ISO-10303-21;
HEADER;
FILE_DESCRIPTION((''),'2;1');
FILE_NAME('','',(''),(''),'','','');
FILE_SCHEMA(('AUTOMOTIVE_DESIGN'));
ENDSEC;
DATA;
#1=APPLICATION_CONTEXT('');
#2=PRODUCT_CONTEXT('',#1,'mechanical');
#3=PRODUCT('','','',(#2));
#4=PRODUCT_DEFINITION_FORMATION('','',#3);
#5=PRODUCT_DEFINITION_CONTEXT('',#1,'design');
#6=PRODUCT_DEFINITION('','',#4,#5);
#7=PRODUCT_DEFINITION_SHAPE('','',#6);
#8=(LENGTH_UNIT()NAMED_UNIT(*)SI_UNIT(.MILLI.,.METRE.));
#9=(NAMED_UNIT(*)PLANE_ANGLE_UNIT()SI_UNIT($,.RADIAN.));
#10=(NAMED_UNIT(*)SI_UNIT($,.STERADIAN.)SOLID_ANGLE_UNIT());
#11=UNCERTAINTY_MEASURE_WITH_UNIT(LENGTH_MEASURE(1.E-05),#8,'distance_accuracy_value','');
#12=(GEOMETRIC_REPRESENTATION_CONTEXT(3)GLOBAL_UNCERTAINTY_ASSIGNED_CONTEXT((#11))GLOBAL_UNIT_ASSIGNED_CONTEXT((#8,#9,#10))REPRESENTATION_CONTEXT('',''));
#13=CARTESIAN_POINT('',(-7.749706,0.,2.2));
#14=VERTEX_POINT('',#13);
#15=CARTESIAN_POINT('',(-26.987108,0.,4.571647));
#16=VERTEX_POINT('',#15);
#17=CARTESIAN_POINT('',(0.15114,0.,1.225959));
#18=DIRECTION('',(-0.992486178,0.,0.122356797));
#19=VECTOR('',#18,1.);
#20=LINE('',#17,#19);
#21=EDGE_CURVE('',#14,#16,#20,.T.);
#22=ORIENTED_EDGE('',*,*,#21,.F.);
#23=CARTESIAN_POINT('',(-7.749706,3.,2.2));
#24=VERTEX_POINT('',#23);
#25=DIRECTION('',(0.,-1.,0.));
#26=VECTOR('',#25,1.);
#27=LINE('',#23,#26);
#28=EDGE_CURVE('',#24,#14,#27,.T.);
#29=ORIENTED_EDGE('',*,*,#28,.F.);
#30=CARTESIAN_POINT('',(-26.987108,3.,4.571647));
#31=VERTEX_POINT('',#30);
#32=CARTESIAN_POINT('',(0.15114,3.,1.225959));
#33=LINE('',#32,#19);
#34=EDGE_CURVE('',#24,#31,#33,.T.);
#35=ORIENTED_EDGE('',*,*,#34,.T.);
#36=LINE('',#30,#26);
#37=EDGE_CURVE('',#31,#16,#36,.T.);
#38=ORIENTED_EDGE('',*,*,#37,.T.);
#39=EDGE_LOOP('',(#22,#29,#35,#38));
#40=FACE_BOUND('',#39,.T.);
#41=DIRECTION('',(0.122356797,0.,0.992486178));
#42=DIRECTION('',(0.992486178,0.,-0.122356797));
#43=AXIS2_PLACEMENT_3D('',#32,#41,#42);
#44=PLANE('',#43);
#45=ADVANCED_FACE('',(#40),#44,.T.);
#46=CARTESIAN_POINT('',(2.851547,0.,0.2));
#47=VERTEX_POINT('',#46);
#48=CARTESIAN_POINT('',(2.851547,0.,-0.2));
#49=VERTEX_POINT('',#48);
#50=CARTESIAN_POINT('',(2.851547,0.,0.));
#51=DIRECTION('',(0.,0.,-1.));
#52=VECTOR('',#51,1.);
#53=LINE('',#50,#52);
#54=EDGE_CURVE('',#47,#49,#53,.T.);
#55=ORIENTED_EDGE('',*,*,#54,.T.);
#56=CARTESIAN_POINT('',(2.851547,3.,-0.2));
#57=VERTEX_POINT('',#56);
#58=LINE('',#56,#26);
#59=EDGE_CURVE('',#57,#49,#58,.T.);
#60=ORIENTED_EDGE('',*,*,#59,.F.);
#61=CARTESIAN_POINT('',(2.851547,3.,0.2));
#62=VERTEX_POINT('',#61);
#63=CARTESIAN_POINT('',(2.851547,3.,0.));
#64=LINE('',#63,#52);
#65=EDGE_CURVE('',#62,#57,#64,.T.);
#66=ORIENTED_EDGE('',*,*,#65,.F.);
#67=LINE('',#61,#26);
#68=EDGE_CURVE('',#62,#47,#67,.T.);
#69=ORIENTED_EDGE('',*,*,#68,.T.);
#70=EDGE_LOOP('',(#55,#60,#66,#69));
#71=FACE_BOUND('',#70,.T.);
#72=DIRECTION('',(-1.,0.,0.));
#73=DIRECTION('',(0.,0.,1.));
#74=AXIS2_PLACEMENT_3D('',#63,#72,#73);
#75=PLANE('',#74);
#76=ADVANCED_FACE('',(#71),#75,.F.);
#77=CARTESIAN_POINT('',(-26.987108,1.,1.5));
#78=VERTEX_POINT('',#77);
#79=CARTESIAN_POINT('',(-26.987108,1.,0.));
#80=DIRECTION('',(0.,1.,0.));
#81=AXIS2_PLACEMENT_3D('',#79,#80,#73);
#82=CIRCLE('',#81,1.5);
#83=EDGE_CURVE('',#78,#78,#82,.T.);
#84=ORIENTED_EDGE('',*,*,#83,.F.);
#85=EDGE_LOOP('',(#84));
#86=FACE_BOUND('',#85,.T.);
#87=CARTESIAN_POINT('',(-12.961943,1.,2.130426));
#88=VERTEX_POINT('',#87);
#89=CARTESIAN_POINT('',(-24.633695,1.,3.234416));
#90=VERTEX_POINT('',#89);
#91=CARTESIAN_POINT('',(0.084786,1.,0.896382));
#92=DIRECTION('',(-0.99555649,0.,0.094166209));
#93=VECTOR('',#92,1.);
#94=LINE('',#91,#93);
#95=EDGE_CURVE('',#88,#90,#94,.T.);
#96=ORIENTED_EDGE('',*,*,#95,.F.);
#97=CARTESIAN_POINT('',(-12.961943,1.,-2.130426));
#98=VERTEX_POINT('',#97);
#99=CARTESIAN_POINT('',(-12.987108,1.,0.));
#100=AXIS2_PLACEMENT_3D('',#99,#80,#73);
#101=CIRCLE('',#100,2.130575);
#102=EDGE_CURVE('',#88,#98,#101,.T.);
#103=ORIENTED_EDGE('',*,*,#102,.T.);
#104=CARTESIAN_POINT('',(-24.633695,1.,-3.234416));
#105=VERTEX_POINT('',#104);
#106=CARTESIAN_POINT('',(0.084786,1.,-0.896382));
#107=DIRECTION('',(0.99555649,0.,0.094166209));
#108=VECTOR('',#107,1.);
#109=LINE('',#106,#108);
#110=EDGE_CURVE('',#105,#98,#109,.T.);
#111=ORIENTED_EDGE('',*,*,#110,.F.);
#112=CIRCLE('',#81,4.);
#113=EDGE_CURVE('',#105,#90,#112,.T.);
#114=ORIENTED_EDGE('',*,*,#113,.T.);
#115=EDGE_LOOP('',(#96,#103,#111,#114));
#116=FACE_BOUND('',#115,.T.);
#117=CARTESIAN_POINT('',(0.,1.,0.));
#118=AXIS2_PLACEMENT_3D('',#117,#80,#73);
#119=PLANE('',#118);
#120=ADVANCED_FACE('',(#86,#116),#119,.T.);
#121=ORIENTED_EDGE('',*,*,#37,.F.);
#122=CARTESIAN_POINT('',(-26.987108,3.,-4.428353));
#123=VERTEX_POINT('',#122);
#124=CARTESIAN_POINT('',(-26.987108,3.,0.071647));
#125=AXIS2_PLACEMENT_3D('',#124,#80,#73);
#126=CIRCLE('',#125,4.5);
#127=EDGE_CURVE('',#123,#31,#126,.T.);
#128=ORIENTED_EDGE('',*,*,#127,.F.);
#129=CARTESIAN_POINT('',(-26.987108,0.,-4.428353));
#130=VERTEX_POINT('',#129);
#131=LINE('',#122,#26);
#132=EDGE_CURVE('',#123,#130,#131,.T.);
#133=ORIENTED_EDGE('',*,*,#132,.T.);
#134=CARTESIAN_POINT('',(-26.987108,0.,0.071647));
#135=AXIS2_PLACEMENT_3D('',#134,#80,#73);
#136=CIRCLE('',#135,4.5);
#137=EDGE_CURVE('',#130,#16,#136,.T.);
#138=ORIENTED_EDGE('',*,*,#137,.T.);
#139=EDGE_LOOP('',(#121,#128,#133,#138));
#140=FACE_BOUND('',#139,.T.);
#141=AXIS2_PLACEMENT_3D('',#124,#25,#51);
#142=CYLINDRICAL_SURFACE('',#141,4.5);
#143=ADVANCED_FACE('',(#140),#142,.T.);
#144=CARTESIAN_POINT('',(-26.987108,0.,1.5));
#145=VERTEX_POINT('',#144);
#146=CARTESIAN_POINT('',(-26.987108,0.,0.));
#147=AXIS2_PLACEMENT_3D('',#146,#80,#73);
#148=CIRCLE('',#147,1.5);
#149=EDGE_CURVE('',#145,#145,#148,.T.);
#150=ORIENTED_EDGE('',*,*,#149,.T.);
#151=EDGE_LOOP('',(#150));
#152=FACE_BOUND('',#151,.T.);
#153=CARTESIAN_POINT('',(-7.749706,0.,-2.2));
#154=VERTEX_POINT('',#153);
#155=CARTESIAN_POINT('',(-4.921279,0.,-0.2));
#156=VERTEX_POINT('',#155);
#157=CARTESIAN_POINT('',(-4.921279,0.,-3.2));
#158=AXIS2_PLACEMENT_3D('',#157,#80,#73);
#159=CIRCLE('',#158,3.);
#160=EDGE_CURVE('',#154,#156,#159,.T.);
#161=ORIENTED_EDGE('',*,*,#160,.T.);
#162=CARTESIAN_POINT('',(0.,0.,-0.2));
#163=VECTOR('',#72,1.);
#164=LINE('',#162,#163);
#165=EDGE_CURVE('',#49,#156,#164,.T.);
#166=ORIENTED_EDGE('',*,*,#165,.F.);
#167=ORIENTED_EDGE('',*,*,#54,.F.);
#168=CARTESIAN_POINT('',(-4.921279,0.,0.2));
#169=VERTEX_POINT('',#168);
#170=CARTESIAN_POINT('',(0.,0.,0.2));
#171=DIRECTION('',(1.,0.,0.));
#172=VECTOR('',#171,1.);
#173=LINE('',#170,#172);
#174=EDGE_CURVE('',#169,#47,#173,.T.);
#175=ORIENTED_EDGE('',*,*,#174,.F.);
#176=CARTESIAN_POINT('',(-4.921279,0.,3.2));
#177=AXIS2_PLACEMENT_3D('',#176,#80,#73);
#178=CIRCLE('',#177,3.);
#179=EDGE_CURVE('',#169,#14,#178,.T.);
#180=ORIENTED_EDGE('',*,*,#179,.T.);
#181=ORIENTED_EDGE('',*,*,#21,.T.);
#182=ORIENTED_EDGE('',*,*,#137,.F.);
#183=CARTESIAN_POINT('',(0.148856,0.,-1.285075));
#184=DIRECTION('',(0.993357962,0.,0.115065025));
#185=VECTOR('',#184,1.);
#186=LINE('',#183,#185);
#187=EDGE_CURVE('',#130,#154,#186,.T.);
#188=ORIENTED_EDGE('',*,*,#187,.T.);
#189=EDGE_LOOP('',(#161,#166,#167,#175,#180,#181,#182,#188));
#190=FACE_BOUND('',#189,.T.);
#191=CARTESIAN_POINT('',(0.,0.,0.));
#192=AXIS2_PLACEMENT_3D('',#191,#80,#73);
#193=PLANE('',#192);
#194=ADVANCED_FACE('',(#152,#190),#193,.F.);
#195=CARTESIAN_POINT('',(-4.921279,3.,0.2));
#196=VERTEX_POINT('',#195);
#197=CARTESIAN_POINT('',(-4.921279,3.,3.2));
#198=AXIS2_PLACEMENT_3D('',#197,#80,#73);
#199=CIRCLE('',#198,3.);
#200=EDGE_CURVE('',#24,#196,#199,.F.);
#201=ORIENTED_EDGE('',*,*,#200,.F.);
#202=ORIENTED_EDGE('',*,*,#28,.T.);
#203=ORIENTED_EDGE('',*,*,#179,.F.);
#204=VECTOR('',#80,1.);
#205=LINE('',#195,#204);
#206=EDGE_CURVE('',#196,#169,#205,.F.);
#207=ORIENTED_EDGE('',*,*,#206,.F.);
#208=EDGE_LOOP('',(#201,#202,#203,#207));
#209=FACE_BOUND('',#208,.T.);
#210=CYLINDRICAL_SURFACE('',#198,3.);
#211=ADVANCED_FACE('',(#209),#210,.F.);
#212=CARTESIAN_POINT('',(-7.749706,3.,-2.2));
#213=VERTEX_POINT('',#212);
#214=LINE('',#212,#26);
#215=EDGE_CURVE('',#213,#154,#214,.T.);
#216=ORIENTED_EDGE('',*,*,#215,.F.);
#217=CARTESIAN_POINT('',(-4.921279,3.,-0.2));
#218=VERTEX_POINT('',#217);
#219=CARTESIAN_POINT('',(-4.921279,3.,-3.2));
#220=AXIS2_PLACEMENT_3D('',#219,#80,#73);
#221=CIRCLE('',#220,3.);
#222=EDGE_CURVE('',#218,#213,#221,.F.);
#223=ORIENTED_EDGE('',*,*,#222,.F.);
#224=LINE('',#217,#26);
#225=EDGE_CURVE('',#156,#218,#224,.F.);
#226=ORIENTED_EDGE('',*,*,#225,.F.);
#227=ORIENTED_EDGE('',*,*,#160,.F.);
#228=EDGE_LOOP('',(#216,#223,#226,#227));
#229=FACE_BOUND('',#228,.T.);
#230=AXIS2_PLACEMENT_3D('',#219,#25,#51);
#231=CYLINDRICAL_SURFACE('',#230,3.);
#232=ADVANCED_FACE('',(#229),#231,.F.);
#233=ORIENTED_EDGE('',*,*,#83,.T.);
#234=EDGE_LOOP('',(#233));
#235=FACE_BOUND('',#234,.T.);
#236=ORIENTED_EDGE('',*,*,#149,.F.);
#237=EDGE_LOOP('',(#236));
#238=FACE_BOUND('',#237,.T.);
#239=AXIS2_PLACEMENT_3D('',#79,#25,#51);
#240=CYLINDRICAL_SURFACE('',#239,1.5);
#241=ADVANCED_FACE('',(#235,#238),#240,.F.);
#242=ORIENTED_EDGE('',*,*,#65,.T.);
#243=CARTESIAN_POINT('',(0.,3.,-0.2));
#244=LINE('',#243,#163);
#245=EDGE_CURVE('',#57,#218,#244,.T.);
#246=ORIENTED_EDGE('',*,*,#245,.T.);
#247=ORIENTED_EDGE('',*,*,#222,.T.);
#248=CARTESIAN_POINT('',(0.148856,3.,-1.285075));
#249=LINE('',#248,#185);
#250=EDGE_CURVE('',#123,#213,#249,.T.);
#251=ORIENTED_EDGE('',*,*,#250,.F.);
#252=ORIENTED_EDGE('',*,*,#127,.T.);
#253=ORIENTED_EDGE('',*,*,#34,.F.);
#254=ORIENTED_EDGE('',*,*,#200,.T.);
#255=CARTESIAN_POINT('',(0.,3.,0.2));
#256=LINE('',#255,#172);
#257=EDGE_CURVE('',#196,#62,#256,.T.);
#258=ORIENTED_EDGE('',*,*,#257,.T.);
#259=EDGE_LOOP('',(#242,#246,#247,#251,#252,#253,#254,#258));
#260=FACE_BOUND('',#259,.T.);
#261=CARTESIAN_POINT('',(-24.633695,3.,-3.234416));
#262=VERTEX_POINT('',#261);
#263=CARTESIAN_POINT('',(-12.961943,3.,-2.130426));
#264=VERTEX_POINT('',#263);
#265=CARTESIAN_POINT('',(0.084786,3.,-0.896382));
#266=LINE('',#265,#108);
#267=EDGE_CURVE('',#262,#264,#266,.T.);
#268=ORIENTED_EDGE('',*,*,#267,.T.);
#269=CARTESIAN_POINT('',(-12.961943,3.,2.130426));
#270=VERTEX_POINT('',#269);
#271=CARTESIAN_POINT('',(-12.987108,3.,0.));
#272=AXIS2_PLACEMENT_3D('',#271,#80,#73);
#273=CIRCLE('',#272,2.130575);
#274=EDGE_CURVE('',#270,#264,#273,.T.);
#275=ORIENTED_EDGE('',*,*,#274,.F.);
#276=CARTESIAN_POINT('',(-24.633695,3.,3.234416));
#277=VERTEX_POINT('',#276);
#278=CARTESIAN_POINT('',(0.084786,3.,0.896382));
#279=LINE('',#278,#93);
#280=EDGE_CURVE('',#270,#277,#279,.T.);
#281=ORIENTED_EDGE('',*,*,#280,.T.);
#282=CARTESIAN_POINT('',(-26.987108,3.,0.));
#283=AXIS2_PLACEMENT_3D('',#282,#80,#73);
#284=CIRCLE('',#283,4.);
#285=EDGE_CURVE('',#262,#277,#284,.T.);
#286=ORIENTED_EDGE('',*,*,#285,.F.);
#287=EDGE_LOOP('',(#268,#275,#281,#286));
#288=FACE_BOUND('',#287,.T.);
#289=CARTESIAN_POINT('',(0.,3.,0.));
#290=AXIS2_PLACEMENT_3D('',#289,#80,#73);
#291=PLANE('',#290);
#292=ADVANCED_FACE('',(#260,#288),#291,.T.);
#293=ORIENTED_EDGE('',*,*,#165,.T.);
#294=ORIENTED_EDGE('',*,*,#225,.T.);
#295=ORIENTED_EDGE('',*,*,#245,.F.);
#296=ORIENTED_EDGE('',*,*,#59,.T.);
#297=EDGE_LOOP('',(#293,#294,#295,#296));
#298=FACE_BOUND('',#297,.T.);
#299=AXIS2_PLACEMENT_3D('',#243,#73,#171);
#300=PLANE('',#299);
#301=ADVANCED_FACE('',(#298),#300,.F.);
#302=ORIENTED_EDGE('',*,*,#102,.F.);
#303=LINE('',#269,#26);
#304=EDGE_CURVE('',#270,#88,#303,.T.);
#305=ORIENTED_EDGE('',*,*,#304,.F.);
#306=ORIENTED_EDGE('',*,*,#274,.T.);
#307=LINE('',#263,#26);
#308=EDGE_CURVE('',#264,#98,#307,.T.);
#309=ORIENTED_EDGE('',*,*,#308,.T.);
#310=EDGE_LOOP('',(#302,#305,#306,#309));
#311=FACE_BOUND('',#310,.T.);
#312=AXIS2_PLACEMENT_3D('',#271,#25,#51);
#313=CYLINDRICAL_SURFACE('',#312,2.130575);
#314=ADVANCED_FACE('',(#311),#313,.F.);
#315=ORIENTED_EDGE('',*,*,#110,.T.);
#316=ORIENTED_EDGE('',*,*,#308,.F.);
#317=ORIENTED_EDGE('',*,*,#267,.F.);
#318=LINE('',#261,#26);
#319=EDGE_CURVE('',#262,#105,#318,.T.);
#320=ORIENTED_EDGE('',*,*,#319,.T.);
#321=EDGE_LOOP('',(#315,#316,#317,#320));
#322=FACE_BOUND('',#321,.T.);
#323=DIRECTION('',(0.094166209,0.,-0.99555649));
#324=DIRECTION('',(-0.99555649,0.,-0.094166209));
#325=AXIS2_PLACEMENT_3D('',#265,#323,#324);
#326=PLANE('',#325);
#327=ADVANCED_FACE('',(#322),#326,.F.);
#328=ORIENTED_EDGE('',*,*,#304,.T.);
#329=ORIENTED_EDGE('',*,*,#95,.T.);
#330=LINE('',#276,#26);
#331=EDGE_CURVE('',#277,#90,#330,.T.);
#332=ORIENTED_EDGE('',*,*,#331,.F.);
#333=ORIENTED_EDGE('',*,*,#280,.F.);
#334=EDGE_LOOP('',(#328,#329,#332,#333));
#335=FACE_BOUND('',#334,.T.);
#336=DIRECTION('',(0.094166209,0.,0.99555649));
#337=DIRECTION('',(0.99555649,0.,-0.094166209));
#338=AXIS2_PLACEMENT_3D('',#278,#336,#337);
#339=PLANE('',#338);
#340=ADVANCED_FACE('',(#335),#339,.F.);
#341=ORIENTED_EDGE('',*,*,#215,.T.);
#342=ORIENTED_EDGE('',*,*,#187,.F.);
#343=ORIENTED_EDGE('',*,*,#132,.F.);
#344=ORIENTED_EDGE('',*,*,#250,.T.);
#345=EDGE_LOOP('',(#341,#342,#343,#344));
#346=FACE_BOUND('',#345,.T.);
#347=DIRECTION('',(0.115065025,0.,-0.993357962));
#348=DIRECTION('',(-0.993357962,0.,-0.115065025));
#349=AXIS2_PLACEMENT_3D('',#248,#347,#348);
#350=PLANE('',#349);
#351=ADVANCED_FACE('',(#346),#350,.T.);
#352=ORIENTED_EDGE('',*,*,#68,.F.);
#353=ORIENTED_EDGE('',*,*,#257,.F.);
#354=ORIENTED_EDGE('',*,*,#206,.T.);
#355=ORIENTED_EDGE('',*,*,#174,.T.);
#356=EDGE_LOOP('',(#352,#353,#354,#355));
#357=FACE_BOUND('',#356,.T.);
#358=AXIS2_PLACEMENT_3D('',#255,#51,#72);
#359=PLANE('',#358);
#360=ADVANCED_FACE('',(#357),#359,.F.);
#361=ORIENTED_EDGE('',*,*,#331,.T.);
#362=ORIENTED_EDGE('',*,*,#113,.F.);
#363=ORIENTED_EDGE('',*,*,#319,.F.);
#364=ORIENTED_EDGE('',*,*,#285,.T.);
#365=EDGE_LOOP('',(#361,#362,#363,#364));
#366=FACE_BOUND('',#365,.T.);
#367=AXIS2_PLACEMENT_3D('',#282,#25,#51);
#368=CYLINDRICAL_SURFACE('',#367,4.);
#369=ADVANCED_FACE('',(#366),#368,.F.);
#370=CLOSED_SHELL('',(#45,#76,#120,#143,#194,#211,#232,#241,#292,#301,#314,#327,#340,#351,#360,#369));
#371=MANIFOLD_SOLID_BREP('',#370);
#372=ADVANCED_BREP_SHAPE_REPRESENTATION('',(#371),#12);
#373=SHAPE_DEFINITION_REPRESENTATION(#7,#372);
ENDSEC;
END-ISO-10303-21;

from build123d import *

# Parameters (mm, degrees)
SKETCH2_R           = 1.5
BOSS_EXTRUDE1_DEPTH = 1
BOSS_EXTRUDE2_DEPTH = 3
FILLET1_R           = 3


with BuildPart() as part:
    # Sketch2 → Boss-Extrude1 (new body)
    with BuildSketch(Plane(origin=(0, 0, 0), x_dir=(1, 0, 0), z_dir=(0, 1, 0))):
        with BuildLine():
            Line((-24.633695323, -3.234416395), (-12.961942578, -2.130426094))
            ThreePointArc((-12.961942578, -2.130426094), (-10.856533145, 0), (-12.961942578, 2.130426094))
            Line((-12.961942578, 2.130426094), (-24.633695323, 3.234416395))
            ThreePointArc((-24.633695323, 3.234416395), (-30.987107864, 0), (-24.633695323, -3.234416395))
        make_face()
        with Locations(Location((-26.987107864, 0, 0), (0, 0, 270))):
            Circle(SKETCH2_R, mode=Mode.SUBTRACT)
    extrude(amount=BOSS_EXTRUDE1_DEPTH)

    # Sketch2<3> → Boss-Extrude2 (add)
    with BuildSketch(Plane(origin=(0, 0, 0), x_dir=(1, 0, 0), z_dir=(0, 1, 0))):
        with BuildLine():
            Line((-7.749705802, -2.2), (-7.749705802, -0.2))
            Line((-7.749705802, -0.2), (2.851546862, -0.2))
            Line((2.851546862, -0.2), (2.851546862, 0.2))
            Line((2.851546862, 0.2), (-7.749705802, 0.2))
            Line((-7.749705802, 0.2), (-7.749705802, 2.2))
            Line((-7.749705802, 2.2), (-26.987107864, 4.428352964))
            ThreePointArc((-26.987107864, 4.428352964), (-31.487107864, -0.071647036), (-26.987107864, -4.571647036))
            Line((-26.987107864, -4.571647036), (-7.749705802, -2.2))
        make_face()
        with BuildLine():
            ThreePointArc((-24.633695323, -3.234416395), (-30.987107864, 0), (-24.633695323, 3.234416395))
            Line((-24.633695323, 3.234416395), (-12.961942578, 2.130426094))
            ThreePointArc((-12.961942578, 2.130426094), (-10.856533145, 0), (-12.961942578, -2.130426094))
            Line((-12.961942578, -2.130426094), (-24.633695323, -3.234416395))
        make_face(mode=Mode.SUBTRACT)
    extrude(amount=BOSS_EXTRUDE2_DEPTH)

    # Fillet1
    # the kernel refuses this fillet: 3 mm, written as the material it adds along each edge
    with BuildSketch(Plane(origin=(-7.749705802, 0, 0.2), x_dir=(0, 0, 1), z_dir=(0, 1, 0))) as fillet1_piece_1:
        with BuildLine():
            CenterArc((3, 2.828427125), FILLET1_R, 180, 70.528779366)
            Line((0, 2.828427125), (-0.06, 2.828427125))
            Line((-0.06, 2.828427125), (-0.06, 0))
            Line((-0.06, 0), (0, -0.06))
            ThreePointArc((0, -0.06), (1, -0.06), (1.98, -0.056568542))
            Line((1.98, -0.056568542), (2, 0))
        make_face()
    extrude(amount=3)
    with BuildSketch(Plane(origin=(-7.749705802, 0, -0.2), x_dir=(1, 0, 0), z_dir=(0, 1, 0))) as fillet1_piece_2:
        with BuildLine():
            CenterArc((2.828427125, 3), FILLET1_R, 199.471220634, 70.528779366)
            Line((0, 2), (-0.056568542, 1.98))
            ThreePointArc((-0.056568542, 1.98), (-0.06, 1), (-0.06, 0))
            Line((-0.06, 0), (0, -0.06))
            Line((0, -0.06), (2.828427125, -0.06))
            Line((2.828427125, -0.06), (2.828427125, 0))
        make_face()
    extrude(amount=3)


solid = part.part
